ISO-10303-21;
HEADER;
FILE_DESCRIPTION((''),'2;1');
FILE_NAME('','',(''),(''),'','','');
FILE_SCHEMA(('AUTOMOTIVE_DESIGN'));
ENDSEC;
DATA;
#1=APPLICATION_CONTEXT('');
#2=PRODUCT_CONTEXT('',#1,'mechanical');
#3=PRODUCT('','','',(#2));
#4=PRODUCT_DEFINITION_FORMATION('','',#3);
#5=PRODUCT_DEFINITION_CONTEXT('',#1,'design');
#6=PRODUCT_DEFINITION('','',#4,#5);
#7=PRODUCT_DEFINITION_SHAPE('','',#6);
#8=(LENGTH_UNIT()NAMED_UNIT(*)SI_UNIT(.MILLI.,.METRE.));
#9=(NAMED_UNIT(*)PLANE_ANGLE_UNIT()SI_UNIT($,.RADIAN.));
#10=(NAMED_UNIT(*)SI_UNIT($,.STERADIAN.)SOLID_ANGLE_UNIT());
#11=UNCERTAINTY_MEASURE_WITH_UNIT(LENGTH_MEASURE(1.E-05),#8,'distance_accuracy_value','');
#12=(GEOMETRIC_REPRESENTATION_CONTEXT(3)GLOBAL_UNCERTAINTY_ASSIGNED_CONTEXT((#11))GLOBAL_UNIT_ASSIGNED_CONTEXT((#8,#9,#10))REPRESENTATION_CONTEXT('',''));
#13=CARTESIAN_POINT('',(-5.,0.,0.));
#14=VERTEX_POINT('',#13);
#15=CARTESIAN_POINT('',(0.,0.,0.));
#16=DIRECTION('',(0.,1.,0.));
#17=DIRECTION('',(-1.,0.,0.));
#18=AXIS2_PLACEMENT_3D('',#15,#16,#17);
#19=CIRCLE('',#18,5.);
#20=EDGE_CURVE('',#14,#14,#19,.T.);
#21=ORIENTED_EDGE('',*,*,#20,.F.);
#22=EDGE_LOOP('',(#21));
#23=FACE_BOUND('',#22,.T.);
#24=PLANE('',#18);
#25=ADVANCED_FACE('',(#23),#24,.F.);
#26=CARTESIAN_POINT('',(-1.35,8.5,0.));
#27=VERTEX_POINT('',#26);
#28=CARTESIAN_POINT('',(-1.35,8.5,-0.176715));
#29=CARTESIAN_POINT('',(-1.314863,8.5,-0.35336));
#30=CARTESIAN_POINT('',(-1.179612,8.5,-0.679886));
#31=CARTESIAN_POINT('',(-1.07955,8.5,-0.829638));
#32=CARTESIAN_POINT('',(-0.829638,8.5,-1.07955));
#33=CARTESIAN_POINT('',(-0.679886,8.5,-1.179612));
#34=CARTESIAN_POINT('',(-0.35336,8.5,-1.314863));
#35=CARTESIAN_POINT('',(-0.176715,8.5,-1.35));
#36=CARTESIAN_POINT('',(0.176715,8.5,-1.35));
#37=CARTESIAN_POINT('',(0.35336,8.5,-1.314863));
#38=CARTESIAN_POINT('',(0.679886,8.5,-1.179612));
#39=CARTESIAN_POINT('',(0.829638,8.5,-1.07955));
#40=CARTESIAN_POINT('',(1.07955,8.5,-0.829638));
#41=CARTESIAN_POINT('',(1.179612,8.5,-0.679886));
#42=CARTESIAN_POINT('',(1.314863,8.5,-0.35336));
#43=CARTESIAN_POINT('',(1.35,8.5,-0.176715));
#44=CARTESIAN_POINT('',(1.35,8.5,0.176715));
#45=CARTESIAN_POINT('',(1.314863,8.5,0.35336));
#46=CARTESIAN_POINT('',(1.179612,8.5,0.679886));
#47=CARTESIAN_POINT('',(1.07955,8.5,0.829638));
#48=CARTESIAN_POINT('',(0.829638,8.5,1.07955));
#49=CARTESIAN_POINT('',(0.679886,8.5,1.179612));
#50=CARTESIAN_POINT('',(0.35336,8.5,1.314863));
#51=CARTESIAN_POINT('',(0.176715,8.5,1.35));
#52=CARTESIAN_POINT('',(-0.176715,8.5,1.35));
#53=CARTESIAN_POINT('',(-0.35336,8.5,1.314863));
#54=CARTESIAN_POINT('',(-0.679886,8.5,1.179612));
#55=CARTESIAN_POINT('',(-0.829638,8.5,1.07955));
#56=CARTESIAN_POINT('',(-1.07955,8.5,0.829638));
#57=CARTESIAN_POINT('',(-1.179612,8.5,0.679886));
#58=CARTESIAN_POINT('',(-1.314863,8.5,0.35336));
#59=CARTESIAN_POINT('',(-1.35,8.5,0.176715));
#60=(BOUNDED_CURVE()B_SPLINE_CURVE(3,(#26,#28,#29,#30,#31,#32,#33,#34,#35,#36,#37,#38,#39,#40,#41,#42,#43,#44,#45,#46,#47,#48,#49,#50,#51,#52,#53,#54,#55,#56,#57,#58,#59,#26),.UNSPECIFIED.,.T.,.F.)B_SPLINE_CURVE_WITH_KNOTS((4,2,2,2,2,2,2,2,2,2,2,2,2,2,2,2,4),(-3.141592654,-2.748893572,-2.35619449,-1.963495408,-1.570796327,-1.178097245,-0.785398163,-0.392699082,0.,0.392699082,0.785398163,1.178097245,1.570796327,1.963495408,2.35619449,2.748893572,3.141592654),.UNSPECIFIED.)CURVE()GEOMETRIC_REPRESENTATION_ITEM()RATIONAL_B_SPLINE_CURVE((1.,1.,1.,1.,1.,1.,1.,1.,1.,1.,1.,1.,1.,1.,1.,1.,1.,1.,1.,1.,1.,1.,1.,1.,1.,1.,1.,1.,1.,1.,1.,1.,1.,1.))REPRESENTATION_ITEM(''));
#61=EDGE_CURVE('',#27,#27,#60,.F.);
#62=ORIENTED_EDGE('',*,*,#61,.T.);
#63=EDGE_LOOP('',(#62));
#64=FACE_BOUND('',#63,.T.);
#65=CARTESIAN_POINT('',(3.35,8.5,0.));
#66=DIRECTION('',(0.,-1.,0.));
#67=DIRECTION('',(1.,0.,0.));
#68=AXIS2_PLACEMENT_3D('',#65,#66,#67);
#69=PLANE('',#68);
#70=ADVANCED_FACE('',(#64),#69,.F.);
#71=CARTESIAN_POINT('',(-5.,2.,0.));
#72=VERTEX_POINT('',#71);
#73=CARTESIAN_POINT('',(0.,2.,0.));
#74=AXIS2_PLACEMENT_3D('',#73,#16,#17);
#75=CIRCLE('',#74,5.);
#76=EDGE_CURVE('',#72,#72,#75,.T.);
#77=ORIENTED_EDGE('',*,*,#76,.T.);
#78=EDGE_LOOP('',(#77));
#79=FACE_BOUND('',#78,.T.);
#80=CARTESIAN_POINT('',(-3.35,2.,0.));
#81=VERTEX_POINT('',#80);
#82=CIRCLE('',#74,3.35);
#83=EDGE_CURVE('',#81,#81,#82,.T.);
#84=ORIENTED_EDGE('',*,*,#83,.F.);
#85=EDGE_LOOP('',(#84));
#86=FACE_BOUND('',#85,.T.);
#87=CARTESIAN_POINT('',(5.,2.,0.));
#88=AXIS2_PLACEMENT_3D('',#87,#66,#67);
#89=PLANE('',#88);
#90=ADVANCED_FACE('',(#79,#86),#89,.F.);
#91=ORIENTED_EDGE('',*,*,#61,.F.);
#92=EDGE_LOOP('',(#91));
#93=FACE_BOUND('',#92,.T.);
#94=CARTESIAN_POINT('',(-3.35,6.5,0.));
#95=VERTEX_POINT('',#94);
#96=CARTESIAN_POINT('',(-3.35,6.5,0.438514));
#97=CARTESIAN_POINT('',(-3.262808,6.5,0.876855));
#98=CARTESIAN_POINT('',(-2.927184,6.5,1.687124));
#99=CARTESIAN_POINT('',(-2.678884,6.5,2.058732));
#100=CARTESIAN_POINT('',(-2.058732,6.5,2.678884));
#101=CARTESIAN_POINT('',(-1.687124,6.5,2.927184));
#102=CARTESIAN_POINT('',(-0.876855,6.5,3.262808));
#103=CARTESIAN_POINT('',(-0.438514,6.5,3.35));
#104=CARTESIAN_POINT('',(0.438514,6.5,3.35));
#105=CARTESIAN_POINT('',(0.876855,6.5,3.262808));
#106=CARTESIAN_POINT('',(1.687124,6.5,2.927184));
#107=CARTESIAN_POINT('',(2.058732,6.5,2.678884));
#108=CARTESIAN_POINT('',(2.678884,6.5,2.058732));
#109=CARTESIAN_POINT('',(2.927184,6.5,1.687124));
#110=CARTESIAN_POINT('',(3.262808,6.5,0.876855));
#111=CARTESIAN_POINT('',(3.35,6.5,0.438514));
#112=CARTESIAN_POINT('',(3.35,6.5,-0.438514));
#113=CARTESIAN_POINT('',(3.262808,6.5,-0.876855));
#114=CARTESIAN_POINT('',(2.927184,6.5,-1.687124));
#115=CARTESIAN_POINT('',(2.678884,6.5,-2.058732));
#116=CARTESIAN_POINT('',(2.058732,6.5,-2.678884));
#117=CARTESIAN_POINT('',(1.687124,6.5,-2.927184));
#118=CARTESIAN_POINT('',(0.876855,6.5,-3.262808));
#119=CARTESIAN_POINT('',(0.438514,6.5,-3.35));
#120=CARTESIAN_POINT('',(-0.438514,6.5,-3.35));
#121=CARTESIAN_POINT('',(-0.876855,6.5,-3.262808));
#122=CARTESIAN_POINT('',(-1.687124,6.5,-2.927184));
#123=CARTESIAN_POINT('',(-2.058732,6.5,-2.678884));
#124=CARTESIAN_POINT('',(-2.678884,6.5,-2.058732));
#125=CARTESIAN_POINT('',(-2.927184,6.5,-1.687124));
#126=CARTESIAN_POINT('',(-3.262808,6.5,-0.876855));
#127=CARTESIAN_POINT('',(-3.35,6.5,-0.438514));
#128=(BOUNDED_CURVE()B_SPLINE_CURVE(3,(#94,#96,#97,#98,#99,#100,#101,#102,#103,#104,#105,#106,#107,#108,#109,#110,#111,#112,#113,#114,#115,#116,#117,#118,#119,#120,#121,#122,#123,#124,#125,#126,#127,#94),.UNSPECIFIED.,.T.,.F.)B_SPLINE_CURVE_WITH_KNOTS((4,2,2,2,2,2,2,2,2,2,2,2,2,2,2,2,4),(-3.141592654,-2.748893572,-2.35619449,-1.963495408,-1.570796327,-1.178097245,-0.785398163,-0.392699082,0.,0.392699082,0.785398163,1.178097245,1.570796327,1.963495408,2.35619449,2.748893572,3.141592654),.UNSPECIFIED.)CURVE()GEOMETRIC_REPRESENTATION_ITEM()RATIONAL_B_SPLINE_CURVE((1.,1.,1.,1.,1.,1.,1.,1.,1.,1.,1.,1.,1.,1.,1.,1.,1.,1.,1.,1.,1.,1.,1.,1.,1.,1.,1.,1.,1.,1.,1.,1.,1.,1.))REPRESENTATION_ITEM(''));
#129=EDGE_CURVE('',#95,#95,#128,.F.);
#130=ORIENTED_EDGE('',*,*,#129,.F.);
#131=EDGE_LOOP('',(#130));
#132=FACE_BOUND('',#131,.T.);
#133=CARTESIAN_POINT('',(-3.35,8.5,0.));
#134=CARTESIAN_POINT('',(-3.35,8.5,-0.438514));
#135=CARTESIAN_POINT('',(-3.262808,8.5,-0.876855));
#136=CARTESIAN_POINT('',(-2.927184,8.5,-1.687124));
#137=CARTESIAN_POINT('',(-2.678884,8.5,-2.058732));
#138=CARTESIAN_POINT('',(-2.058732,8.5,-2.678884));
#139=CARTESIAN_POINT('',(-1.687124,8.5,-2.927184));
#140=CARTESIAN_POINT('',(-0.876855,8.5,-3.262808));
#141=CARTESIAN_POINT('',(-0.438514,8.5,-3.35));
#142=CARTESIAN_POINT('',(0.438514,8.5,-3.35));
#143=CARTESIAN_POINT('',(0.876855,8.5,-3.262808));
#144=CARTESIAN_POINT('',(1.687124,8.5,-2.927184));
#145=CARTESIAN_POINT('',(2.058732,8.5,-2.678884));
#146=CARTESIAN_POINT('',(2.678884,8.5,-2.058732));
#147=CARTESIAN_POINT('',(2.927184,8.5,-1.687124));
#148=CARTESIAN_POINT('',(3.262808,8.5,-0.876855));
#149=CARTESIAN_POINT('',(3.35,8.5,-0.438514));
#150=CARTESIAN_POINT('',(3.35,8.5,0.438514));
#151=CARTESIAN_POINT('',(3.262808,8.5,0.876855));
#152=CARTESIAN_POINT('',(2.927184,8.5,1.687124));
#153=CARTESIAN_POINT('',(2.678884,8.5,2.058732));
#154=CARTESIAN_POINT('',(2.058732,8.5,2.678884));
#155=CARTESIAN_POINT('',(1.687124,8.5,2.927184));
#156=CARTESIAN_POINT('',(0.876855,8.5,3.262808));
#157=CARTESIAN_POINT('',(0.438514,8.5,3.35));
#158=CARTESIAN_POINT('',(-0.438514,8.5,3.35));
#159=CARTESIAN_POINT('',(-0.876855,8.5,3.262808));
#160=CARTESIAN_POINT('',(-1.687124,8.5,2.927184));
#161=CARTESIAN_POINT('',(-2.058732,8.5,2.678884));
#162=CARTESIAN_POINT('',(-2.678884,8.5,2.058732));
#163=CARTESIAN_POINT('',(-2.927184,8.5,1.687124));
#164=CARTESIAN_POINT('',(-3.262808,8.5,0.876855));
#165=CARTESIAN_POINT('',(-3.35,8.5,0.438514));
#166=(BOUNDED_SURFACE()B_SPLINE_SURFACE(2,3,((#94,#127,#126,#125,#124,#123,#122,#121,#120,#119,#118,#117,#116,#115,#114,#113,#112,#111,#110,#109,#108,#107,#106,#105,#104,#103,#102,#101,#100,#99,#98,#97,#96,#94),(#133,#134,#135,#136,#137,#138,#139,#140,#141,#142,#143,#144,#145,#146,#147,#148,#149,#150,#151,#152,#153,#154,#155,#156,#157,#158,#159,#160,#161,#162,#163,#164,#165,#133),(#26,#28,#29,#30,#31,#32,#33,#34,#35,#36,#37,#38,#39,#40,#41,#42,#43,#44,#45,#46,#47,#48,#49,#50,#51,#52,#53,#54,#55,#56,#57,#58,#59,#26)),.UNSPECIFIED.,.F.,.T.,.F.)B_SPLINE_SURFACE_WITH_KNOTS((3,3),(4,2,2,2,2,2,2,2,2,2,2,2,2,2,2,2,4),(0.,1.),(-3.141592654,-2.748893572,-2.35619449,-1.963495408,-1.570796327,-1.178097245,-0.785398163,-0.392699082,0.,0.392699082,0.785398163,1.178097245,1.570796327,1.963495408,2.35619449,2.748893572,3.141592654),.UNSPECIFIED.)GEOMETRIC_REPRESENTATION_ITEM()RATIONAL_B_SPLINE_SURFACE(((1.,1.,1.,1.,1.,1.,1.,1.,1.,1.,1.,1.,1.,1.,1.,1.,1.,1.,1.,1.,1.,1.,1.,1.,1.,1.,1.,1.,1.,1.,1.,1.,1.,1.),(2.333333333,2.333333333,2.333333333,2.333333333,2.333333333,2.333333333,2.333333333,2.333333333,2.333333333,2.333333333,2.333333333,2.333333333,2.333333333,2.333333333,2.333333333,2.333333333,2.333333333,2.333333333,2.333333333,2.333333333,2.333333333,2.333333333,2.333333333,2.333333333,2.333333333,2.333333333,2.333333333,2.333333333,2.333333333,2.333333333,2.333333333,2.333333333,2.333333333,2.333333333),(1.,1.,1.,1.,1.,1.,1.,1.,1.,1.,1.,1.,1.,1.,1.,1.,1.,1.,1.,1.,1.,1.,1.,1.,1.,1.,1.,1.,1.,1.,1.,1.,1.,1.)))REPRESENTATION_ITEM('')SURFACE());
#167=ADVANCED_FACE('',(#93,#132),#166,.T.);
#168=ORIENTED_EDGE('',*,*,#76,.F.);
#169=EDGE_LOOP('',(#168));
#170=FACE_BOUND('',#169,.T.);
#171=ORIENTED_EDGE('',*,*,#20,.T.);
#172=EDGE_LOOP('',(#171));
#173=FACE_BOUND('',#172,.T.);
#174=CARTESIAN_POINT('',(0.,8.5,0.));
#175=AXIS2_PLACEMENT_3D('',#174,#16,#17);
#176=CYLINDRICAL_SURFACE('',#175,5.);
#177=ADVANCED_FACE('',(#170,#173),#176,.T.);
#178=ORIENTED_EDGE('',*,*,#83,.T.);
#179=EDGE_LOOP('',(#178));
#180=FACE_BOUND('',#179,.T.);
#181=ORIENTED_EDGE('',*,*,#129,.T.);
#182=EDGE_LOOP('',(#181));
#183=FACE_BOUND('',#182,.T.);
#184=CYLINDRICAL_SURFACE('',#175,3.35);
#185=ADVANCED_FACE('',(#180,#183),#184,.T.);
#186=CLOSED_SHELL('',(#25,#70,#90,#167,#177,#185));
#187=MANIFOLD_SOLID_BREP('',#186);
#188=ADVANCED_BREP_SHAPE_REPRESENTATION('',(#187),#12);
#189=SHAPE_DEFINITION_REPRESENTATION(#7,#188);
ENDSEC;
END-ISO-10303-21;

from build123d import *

# Parameters (mm, degrees)
CONG_1_SIZE = 2


with BuildPart() as part:
    # Esquisse1 → Révolution1 (revolve)
    with BuildSketch(Plane.XY, mode=Mode.PRIVATE) as r_volution1_sk:
        Polygon((0, 0), (5, 0), (5, 2), (3.35, 2), (3.35, 8.5), (0, 8.5), align=None)
    revolve(r_volution1_sk.sketch.rotate(Axis((0, 8.5, 0), (0, -1, 0)), 180), axis=Axis((0, 8.5, 0), (0, -1, 0)))

    # Congé1
    # a fillet whose section is not a circle: 2 mm, written as the material it takes off along each edge
    with BuildSketch(Plane(origin=(0, 8.5, 0), x_dir=(-1, 0, 0), z_dir=(0, 0, 1))) as cong_1_piece_1:
        with BuildLine():
            Bezier((3.35, CONG_1_SIZE), (3.35, 0), (3.35 - CONG_1_SIZE, 0), weights=[1, 2.333333333, 1])
            Line((3.35 - CONG_1_SIZE, 0), (3.35, 0))
            Line((3.35, 0), (3.35, CONG_1_SIZE))
        make_face()
    revolve(axis=Axis((0, 8.5, 0), (0, -1, 0)), mode=Mode.SUBTRACT)


solid = part.part
